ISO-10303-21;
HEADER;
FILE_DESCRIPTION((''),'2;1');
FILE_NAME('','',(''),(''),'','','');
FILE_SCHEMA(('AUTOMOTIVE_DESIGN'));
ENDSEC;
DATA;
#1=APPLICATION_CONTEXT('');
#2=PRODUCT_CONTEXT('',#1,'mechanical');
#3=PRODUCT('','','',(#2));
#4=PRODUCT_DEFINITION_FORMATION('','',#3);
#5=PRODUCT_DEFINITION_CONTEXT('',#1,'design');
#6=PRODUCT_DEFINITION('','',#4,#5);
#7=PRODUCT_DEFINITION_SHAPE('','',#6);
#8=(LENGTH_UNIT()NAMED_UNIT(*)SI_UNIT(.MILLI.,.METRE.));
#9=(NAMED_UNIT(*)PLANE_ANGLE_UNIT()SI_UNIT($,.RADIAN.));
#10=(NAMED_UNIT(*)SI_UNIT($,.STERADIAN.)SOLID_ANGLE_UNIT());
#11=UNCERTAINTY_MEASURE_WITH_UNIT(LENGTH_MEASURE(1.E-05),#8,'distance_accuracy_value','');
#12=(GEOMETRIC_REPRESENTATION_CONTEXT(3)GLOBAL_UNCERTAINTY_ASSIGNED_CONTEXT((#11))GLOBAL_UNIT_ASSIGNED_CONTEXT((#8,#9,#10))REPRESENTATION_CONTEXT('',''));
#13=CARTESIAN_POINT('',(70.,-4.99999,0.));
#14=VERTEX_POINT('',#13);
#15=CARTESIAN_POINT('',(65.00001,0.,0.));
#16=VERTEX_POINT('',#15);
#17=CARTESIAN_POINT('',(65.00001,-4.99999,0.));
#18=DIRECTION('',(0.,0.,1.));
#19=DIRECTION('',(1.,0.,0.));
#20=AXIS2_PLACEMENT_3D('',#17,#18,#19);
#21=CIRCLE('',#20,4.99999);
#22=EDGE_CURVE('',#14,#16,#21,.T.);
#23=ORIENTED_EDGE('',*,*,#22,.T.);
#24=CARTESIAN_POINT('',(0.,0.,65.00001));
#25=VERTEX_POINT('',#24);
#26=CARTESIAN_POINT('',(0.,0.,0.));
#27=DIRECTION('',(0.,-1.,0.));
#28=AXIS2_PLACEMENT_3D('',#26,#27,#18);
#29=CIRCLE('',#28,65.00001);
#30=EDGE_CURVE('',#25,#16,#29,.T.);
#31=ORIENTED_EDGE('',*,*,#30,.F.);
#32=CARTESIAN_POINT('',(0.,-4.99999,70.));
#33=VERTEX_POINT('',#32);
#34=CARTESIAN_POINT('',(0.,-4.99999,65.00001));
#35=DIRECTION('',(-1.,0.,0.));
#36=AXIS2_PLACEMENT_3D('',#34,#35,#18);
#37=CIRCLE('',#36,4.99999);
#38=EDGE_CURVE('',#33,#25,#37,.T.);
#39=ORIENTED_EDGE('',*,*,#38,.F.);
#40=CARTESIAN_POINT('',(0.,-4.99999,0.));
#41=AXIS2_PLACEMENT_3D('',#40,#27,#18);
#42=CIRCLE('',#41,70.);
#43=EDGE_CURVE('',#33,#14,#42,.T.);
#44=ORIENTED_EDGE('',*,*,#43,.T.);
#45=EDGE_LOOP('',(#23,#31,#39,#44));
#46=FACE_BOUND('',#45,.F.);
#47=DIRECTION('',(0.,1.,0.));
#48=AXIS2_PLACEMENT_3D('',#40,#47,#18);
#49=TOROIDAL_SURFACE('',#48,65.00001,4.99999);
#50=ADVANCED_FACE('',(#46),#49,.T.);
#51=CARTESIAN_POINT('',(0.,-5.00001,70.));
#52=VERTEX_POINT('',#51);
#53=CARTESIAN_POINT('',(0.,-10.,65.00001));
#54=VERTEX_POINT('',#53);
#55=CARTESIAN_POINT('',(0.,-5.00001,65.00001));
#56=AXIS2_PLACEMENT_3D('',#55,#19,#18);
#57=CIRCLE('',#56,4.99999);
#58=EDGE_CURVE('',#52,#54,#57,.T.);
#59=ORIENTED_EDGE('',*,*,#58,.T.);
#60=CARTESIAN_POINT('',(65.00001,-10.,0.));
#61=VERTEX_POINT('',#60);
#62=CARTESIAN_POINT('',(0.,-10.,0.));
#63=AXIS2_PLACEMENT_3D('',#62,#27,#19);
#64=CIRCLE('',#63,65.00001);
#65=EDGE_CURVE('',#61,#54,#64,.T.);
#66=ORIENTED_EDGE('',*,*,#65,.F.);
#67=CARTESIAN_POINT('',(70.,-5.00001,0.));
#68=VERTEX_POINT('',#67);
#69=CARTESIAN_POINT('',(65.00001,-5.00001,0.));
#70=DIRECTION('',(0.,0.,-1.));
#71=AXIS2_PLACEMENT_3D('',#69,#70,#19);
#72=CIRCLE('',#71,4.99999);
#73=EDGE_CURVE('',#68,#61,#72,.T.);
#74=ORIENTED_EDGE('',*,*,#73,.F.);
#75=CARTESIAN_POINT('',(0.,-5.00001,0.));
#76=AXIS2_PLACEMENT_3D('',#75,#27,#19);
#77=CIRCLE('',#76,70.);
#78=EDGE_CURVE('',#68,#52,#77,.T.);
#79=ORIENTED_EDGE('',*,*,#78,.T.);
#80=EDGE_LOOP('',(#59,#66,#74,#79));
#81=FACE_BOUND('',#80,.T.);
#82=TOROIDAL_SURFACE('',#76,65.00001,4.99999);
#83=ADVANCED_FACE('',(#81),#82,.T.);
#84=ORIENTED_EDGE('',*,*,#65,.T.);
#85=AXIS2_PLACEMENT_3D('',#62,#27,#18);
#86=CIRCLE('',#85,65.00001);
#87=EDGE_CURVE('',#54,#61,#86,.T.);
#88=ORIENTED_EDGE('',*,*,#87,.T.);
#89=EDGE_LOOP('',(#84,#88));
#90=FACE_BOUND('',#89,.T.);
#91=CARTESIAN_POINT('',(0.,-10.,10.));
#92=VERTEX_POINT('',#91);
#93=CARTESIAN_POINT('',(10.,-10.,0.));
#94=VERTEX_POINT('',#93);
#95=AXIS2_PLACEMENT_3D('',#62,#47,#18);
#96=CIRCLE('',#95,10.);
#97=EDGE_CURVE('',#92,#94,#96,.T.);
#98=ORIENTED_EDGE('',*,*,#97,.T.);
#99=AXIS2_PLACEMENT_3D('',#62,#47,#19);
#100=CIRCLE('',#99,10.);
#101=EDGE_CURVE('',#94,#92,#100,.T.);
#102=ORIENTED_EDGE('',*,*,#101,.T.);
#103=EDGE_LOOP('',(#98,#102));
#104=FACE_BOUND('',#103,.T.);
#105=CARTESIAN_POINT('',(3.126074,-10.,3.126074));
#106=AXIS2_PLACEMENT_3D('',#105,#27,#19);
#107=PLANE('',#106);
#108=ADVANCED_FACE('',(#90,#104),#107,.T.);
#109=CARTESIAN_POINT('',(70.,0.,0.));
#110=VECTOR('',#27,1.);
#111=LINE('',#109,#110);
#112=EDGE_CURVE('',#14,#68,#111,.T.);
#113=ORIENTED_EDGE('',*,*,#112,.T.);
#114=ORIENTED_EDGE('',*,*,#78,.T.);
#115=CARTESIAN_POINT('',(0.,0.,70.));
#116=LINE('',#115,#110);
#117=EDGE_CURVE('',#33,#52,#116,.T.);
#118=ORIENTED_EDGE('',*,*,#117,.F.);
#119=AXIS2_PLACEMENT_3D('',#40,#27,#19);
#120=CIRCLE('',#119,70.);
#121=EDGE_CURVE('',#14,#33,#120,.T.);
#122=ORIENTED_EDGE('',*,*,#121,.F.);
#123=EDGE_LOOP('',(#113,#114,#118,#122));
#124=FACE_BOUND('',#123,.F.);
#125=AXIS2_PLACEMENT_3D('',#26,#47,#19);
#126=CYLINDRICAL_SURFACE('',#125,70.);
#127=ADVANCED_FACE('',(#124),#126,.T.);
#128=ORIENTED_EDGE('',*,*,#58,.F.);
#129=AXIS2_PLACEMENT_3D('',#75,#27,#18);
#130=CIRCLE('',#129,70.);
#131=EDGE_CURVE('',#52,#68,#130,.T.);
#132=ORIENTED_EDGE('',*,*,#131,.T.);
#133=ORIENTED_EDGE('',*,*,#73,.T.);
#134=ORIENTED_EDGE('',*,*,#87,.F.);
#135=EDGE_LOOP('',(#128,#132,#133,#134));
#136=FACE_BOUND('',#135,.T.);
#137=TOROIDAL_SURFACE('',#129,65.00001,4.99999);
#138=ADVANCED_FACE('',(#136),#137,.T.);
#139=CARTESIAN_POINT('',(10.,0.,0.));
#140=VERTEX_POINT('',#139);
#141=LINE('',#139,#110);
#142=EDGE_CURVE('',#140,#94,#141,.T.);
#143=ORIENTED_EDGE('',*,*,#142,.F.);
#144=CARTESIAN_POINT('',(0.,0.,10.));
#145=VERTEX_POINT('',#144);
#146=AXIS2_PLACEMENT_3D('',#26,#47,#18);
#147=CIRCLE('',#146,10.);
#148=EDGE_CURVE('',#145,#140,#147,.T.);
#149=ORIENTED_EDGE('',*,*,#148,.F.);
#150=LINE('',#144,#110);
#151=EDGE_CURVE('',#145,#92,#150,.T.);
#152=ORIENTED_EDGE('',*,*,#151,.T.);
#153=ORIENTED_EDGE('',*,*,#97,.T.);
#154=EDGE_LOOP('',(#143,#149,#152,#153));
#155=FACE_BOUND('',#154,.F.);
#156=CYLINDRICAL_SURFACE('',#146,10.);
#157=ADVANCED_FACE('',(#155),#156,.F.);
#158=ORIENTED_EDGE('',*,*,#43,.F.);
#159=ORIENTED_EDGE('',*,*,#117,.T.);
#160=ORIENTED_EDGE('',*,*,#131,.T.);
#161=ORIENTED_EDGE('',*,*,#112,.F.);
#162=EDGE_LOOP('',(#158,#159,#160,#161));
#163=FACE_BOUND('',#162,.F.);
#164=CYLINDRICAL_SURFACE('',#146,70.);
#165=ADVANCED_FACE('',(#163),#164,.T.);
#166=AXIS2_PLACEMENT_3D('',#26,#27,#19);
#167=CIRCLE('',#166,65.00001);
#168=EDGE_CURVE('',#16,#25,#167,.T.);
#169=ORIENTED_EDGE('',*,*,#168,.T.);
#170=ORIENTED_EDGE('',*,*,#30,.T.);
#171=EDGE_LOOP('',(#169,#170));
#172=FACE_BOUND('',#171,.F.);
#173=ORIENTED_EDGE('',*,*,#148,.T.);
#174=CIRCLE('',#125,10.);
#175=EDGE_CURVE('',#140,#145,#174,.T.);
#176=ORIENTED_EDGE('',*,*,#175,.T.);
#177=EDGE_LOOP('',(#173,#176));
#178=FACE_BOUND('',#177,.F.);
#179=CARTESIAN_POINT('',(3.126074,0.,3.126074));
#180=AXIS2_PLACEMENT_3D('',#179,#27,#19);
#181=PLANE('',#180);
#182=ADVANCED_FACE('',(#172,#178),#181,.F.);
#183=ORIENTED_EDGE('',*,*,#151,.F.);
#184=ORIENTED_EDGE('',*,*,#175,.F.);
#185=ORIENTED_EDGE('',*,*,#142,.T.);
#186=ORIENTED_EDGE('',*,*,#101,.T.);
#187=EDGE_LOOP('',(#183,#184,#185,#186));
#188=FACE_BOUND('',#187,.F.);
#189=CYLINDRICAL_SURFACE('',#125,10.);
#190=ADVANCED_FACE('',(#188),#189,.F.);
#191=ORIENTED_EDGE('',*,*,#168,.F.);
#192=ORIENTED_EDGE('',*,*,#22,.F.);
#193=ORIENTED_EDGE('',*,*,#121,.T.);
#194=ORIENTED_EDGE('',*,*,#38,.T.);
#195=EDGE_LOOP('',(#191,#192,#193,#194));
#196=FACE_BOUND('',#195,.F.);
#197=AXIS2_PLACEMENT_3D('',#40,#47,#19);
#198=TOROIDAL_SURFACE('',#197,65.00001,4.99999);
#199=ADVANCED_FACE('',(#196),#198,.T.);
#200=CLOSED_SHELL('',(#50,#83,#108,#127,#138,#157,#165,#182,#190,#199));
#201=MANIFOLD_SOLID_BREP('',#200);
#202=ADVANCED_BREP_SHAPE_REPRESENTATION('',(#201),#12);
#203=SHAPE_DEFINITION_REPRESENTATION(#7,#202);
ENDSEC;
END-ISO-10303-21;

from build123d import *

# Parameters (mm, degrees)
F1_DEPTH = 10
F2_R     = 4.99999


# Not quite as in the source:
# - a fillet or chamfer is up to 0.001 mm smaller than in the source, because OpenCascade refuses the exact size


with BuildPart() as f1:
    # F0 (on Front) → F1 (new body)
    with BuildSketch(Plane.XZ):
        with BuildLine():
            ThreePointArc((0, 70), (-49.4974746831, -49.4974746831), (70, 0))
            ThreePointArc((70, 0), (49.4974746831, 49.4974746831), (0, 70))
        make_face()
        with BuildLine():
            ThreePointArc((10, 0), (-7.0710678119, -7.0710678119), (0, 10))
            ThreePointArc((0, 10), (7.0710678119, 7.0710678119), (10, 0))
        make_face(mode=Mode.SUBTRACT)
    extrude(amount=F1_DEPTH)

    # F2 (radius 5 in the source; OpenCascade refuses exactly that, so slightly less here)
    f2_edges = [f1.edges().sort_by_distance(p)[0] for p in [
        (-70, -10, 0),
        (-70, 0, 0),
    ]]
    fillet(f2_edges, radius=F2_R)


solid = f1.part
